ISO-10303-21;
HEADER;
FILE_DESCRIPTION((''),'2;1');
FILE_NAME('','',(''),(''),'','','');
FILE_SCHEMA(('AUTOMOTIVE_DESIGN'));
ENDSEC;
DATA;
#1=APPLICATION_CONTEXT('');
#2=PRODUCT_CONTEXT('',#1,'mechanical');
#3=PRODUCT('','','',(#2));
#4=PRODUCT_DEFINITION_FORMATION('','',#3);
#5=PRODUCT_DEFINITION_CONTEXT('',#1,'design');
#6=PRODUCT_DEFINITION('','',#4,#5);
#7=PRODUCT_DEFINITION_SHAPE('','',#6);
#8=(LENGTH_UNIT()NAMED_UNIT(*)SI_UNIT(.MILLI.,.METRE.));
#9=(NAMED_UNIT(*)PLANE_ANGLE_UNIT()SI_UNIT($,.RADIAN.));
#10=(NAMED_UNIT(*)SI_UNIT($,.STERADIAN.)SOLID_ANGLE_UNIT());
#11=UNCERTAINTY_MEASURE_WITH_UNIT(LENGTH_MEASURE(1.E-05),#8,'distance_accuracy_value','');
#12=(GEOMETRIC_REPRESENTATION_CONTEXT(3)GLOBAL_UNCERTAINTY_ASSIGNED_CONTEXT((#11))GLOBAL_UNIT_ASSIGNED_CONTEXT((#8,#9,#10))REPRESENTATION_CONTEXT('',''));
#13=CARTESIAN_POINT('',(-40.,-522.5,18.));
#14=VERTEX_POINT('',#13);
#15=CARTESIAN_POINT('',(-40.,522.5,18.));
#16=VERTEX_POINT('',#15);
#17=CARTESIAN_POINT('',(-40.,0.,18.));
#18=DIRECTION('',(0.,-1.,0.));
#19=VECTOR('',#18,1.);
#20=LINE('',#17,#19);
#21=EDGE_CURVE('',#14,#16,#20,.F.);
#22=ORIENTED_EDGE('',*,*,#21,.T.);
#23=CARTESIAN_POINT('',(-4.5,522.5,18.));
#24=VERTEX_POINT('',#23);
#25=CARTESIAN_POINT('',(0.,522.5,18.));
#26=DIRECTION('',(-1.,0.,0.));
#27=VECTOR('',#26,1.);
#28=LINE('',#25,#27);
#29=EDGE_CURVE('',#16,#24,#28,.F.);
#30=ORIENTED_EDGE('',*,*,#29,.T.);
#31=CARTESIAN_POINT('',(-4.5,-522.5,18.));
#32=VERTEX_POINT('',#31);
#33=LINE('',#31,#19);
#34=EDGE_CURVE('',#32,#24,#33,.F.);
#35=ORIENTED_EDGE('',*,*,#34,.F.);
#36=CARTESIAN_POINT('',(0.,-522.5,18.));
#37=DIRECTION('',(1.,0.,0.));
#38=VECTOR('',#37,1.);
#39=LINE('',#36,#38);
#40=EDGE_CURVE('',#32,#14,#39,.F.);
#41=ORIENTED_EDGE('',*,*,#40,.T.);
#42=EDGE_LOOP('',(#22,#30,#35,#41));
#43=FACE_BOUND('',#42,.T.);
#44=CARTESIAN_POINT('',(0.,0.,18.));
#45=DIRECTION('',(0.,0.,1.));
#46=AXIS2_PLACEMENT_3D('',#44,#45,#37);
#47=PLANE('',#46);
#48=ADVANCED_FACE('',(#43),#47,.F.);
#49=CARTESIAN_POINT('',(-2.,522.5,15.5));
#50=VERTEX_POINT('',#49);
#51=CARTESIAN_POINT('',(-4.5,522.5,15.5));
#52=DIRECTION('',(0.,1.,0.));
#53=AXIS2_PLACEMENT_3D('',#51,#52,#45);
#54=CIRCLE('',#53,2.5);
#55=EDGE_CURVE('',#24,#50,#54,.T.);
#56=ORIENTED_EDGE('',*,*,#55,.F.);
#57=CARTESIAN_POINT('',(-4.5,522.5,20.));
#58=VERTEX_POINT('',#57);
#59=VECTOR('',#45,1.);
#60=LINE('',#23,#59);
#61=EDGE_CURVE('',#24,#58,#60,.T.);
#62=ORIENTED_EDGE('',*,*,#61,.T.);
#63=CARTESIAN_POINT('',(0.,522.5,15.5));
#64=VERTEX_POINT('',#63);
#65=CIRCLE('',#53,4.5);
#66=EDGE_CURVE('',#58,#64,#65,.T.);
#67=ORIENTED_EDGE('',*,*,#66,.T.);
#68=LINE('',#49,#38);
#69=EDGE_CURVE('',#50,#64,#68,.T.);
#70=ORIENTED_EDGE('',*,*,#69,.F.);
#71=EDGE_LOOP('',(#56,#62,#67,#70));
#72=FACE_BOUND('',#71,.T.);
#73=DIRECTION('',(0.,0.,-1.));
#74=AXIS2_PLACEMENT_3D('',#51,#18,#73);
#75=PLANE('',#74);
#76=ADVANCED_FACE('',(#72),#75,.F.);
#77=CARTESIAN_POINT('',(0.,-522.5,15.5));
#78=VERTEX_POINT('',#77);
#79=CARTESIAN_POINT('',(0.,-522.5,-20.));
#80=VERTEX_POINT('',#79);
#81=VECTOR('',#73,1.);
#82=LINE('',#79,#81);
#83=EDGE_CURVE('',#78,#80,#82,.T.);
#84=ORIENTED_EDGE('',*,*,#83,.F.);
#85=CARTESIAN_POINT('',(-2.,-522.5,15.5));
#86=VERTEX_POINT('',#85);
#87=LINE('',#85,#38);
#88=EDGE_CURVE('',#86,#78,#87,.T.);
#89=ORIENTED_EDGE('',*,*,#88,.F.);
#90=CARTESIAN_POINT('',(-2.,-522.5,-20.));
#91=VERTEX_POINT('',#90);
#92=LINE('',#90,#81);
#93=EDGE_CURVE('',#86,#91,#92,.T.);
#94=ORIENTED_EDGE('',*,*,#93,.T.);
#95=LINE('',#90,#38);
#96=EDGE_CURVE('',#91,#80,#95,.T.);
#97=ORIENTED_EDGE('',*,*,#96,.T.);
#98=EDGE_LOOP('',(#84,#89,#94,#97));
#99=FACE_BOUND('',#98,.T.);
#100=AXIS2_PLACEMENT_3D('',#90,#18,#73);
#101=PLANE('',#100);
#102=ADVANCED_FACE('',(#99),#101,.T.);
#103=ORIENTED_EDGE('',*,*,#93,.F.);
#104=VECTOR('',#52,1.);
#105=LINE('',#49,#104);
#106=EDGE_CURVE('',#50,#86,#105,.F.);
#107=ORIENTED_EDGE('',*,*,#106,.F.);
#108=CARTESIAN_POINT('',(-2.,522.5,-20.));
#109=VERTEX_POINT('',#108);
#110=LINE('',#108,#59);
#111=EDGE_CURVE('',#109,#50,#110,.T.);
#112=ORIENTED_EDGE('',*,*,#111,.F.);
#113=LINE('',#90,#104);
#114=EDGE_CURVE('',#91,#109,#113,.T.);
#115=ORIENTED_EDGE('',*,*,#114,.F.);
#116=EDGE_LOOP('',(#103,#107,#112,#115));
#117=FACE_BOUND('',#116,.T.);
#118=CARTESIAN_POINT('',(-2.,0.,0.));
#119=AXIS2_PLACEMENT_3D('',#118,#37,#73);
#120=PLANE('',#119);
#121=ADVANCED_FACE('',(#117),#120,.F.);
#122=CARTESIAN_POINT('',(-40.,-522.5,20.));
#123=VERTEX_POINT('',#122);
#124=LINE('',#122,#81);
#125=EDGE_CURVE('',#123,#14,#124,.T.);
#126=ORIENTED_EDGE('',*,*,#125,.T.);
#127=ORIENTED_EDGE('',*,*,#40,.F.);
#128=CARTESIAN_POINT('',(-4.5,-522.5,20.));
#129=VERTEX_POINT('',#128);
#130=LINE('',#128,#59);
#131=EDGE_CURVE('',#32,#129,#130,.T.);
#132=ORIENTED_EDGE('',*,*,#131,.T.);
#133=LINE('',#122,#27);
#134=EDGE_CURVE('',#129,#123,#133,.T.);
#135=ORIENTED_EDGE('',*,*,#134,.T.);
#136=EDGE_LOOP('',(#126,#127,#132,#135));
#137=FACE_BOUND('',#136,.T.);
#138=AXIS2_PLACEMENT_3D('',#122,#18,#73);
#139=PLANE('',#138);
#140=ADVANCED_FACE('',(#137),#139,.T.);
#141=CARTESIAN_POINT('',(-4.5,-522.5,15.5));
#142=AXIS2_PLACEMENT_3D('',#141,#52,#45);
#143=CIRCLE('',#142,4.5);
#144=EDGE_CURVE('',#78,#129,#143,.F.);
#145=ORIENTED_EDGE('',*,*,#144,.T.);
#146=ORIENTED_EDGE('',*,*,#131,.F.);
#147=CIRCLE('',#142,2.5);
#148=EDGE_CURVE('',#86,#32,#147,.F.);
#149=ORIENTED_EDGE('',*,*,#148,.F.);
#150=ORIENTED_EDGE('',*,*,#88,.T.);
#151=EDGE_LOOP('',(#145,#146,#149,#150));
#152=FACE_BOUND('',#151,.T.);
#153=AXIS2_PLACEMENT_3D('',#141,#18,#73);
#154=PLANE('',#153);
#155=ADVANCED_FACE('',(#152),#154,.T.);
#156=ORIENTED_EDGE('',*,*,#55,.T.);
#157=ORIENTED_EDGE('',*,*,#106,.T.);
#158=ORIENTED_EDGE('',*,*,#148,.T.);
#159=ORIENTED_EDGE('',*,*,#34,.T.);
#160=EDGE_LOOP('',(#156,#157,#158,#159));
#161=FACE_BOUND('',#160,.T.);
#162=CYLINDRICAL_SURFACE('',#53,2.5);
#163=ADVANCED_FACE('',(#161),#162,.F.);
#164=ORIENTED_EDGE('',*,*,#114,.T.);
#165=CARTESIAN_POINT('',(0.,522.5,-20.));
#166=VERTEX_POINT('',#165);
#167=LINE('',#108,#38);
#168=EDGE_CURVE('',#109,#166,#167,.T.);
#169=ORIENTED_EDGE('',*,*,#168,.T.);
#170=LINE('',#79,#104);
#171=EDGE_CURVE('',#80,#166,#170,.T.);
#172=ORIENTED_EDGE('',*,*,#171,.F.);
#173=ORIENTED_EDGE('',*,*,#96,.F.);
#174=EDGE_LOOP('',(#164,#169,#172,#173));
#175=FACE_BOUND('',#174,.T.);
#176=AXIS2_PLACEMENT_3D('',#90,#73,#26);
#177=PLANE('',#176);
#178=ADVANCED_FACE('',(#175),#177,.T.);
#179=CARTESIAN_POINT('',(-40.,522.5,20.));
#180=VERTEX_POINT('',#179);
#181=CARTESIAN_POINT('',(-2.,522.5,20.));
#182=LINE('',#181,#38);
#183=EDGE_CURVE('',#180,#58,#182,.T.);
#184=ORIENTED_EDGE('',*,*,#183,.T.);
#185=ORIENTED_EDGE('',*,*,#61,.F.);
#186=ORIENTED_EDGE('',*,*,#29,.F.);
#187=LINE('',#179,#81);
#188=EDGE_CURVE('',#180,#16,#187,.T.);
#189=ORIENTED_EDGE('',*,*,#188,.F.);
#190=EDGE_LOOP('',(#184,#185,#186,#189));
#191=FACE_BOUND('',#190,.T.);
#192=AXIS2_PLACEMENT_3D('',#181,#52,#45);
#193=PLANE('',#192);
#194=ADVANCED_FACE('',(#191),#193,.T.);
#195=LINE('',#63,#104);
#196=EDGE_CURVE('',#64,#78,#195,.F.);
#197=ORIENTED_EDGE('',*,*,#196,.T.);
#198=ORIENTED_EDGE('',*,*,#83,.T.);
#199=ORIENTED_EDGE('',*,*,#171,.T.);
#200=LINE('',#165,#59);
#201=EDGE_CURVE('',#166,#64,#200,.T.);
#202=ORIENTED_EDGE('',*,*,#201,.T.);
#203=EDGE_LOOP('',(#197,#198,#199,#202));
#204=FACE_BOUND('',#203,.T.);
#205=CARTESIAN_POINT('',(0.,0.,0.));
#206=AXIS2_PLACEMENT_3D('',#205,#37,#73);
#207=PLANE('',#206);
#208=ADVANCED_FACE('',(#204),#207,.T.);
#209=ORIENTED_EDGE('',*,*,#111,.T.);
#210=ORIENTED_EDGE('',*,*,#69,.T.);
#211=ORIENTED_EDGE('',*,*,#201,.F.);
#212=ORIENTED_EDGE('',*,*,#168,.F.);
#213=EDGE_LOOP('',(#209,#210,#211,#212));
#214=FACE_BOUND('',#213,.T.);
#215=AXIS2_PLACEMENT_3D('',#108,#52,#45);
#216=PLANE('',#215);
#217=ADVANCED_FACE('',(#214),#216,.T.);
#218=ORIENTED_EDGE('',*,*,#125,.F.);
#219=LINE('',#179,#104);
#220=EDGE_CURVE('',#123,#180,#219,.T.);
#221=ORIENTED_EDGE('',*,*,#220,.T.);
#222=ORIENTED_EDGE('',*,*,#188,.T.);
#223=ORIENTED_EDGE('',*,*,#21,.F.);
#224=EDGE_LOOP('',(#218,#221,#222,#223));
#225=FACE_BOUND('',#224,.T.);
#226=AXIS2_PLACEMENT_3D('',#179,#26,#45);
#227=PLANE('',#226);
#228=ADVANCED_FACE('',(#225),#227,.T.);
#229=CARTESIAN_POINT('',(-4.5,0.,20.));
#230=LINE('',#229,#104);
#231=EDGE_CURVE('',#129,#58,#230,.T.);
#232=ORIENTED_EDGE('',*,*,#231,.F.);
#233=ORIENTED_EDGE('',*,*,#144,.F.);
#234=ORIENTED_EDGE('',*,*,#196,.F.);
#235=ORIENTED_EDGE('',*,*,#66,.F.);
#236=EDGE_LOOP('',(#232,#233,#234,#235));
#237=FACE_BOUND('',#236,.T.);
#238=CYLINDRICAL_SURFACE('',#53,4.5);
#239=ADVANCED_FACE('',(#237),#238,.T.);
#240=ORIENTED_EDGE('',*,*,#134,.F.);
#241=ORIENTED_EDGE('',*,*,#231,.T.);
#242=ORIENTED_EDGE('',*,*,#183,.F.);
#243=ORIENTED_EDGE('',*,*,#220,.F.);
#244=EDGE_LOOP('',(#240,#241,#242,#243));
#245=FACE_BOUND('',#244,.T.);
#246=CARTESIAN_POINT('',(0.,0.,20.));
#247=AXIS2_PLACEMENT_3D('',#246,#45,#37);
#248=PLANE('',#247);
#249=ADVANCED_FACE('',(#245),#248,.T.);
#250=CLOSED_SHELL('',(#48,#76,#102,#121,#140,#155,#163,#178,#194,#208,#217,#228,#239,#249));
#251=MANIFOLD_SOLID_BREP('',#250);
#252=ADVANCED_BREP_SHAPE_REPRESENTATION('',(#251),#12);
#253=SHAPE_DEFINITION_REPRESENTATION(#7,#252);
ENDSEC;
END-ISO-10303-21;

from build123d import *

# Parameters (mm, degrees)
SKETCH1_W                    = 40
SKETCH1_H                    = 1045
BASE_FLANGE1_DEPTH           = 2
EDGE_FLANGE1_STRIP_W         = 13
EDGE_FLANGE1_STRIP_H         = 2
EDGE_FLANGE1_STRIP_CUT_DEPTH = 1045
EDGE_FLANGE1_DEPTH           = 1045


# Sheet-metal steps are written as plain solids
with BuildPart() as part:
    # Sketch1 → Base-Flange1 (new body)
    with BuildSketch(Plane(origin=(0, 0, 0), x_dir=(0, 0, -1), z_dir=(1, 0, 0))):
        Rectangle(SKETCH1_W, SKETCH1_H)
    extrude(amount=-BASE_FLANGE1_DEPTH)

    # Edge-Flange1 strip (across the edge) → Edge-Flange1 strip cut (cut)
    with BuildSketch(Plane(origin=(-2, -522.5, 20), x_dir=(0, 0, -1), z_dir=(0, 1, 0))):
        with Locations((-2, -1)):
            Rectangle(EDGE_FLANGE1_STRIP_W, EDGE_FLANGE1_STRIP_H)
    extrude(amount=EDGE_FLANGE1_STRIP_CUT_DEPTH, mode=Mode.SUBTRACT)

    # Edge-Flange1 section (across the edge) → Edge-Flange1 (add)
    with BuildSketch(Plane(origin=(-2, -522.5, 20), x_dir=(0, 0, -1), z_dir=(0, 1, 0))):
        with BuildLine():
            Line((0, 2.5), (0, 38))
            Line((0, 38), (2, 38))
            Line((2, 38), (2, 2.5))
            ThreePointArc((2, 2.5), (2.732233047, 0.732233047), (4.5, 0))
            Line((4.5, 0), (4.5, -2))
            ThreePointArc((4.5, -2), (1.318019485, -0.681980515), (0, 2.5))
        make_face()
    extrude(amount=EDGE_FLANGE1_DEPTH)


solid = part.part
